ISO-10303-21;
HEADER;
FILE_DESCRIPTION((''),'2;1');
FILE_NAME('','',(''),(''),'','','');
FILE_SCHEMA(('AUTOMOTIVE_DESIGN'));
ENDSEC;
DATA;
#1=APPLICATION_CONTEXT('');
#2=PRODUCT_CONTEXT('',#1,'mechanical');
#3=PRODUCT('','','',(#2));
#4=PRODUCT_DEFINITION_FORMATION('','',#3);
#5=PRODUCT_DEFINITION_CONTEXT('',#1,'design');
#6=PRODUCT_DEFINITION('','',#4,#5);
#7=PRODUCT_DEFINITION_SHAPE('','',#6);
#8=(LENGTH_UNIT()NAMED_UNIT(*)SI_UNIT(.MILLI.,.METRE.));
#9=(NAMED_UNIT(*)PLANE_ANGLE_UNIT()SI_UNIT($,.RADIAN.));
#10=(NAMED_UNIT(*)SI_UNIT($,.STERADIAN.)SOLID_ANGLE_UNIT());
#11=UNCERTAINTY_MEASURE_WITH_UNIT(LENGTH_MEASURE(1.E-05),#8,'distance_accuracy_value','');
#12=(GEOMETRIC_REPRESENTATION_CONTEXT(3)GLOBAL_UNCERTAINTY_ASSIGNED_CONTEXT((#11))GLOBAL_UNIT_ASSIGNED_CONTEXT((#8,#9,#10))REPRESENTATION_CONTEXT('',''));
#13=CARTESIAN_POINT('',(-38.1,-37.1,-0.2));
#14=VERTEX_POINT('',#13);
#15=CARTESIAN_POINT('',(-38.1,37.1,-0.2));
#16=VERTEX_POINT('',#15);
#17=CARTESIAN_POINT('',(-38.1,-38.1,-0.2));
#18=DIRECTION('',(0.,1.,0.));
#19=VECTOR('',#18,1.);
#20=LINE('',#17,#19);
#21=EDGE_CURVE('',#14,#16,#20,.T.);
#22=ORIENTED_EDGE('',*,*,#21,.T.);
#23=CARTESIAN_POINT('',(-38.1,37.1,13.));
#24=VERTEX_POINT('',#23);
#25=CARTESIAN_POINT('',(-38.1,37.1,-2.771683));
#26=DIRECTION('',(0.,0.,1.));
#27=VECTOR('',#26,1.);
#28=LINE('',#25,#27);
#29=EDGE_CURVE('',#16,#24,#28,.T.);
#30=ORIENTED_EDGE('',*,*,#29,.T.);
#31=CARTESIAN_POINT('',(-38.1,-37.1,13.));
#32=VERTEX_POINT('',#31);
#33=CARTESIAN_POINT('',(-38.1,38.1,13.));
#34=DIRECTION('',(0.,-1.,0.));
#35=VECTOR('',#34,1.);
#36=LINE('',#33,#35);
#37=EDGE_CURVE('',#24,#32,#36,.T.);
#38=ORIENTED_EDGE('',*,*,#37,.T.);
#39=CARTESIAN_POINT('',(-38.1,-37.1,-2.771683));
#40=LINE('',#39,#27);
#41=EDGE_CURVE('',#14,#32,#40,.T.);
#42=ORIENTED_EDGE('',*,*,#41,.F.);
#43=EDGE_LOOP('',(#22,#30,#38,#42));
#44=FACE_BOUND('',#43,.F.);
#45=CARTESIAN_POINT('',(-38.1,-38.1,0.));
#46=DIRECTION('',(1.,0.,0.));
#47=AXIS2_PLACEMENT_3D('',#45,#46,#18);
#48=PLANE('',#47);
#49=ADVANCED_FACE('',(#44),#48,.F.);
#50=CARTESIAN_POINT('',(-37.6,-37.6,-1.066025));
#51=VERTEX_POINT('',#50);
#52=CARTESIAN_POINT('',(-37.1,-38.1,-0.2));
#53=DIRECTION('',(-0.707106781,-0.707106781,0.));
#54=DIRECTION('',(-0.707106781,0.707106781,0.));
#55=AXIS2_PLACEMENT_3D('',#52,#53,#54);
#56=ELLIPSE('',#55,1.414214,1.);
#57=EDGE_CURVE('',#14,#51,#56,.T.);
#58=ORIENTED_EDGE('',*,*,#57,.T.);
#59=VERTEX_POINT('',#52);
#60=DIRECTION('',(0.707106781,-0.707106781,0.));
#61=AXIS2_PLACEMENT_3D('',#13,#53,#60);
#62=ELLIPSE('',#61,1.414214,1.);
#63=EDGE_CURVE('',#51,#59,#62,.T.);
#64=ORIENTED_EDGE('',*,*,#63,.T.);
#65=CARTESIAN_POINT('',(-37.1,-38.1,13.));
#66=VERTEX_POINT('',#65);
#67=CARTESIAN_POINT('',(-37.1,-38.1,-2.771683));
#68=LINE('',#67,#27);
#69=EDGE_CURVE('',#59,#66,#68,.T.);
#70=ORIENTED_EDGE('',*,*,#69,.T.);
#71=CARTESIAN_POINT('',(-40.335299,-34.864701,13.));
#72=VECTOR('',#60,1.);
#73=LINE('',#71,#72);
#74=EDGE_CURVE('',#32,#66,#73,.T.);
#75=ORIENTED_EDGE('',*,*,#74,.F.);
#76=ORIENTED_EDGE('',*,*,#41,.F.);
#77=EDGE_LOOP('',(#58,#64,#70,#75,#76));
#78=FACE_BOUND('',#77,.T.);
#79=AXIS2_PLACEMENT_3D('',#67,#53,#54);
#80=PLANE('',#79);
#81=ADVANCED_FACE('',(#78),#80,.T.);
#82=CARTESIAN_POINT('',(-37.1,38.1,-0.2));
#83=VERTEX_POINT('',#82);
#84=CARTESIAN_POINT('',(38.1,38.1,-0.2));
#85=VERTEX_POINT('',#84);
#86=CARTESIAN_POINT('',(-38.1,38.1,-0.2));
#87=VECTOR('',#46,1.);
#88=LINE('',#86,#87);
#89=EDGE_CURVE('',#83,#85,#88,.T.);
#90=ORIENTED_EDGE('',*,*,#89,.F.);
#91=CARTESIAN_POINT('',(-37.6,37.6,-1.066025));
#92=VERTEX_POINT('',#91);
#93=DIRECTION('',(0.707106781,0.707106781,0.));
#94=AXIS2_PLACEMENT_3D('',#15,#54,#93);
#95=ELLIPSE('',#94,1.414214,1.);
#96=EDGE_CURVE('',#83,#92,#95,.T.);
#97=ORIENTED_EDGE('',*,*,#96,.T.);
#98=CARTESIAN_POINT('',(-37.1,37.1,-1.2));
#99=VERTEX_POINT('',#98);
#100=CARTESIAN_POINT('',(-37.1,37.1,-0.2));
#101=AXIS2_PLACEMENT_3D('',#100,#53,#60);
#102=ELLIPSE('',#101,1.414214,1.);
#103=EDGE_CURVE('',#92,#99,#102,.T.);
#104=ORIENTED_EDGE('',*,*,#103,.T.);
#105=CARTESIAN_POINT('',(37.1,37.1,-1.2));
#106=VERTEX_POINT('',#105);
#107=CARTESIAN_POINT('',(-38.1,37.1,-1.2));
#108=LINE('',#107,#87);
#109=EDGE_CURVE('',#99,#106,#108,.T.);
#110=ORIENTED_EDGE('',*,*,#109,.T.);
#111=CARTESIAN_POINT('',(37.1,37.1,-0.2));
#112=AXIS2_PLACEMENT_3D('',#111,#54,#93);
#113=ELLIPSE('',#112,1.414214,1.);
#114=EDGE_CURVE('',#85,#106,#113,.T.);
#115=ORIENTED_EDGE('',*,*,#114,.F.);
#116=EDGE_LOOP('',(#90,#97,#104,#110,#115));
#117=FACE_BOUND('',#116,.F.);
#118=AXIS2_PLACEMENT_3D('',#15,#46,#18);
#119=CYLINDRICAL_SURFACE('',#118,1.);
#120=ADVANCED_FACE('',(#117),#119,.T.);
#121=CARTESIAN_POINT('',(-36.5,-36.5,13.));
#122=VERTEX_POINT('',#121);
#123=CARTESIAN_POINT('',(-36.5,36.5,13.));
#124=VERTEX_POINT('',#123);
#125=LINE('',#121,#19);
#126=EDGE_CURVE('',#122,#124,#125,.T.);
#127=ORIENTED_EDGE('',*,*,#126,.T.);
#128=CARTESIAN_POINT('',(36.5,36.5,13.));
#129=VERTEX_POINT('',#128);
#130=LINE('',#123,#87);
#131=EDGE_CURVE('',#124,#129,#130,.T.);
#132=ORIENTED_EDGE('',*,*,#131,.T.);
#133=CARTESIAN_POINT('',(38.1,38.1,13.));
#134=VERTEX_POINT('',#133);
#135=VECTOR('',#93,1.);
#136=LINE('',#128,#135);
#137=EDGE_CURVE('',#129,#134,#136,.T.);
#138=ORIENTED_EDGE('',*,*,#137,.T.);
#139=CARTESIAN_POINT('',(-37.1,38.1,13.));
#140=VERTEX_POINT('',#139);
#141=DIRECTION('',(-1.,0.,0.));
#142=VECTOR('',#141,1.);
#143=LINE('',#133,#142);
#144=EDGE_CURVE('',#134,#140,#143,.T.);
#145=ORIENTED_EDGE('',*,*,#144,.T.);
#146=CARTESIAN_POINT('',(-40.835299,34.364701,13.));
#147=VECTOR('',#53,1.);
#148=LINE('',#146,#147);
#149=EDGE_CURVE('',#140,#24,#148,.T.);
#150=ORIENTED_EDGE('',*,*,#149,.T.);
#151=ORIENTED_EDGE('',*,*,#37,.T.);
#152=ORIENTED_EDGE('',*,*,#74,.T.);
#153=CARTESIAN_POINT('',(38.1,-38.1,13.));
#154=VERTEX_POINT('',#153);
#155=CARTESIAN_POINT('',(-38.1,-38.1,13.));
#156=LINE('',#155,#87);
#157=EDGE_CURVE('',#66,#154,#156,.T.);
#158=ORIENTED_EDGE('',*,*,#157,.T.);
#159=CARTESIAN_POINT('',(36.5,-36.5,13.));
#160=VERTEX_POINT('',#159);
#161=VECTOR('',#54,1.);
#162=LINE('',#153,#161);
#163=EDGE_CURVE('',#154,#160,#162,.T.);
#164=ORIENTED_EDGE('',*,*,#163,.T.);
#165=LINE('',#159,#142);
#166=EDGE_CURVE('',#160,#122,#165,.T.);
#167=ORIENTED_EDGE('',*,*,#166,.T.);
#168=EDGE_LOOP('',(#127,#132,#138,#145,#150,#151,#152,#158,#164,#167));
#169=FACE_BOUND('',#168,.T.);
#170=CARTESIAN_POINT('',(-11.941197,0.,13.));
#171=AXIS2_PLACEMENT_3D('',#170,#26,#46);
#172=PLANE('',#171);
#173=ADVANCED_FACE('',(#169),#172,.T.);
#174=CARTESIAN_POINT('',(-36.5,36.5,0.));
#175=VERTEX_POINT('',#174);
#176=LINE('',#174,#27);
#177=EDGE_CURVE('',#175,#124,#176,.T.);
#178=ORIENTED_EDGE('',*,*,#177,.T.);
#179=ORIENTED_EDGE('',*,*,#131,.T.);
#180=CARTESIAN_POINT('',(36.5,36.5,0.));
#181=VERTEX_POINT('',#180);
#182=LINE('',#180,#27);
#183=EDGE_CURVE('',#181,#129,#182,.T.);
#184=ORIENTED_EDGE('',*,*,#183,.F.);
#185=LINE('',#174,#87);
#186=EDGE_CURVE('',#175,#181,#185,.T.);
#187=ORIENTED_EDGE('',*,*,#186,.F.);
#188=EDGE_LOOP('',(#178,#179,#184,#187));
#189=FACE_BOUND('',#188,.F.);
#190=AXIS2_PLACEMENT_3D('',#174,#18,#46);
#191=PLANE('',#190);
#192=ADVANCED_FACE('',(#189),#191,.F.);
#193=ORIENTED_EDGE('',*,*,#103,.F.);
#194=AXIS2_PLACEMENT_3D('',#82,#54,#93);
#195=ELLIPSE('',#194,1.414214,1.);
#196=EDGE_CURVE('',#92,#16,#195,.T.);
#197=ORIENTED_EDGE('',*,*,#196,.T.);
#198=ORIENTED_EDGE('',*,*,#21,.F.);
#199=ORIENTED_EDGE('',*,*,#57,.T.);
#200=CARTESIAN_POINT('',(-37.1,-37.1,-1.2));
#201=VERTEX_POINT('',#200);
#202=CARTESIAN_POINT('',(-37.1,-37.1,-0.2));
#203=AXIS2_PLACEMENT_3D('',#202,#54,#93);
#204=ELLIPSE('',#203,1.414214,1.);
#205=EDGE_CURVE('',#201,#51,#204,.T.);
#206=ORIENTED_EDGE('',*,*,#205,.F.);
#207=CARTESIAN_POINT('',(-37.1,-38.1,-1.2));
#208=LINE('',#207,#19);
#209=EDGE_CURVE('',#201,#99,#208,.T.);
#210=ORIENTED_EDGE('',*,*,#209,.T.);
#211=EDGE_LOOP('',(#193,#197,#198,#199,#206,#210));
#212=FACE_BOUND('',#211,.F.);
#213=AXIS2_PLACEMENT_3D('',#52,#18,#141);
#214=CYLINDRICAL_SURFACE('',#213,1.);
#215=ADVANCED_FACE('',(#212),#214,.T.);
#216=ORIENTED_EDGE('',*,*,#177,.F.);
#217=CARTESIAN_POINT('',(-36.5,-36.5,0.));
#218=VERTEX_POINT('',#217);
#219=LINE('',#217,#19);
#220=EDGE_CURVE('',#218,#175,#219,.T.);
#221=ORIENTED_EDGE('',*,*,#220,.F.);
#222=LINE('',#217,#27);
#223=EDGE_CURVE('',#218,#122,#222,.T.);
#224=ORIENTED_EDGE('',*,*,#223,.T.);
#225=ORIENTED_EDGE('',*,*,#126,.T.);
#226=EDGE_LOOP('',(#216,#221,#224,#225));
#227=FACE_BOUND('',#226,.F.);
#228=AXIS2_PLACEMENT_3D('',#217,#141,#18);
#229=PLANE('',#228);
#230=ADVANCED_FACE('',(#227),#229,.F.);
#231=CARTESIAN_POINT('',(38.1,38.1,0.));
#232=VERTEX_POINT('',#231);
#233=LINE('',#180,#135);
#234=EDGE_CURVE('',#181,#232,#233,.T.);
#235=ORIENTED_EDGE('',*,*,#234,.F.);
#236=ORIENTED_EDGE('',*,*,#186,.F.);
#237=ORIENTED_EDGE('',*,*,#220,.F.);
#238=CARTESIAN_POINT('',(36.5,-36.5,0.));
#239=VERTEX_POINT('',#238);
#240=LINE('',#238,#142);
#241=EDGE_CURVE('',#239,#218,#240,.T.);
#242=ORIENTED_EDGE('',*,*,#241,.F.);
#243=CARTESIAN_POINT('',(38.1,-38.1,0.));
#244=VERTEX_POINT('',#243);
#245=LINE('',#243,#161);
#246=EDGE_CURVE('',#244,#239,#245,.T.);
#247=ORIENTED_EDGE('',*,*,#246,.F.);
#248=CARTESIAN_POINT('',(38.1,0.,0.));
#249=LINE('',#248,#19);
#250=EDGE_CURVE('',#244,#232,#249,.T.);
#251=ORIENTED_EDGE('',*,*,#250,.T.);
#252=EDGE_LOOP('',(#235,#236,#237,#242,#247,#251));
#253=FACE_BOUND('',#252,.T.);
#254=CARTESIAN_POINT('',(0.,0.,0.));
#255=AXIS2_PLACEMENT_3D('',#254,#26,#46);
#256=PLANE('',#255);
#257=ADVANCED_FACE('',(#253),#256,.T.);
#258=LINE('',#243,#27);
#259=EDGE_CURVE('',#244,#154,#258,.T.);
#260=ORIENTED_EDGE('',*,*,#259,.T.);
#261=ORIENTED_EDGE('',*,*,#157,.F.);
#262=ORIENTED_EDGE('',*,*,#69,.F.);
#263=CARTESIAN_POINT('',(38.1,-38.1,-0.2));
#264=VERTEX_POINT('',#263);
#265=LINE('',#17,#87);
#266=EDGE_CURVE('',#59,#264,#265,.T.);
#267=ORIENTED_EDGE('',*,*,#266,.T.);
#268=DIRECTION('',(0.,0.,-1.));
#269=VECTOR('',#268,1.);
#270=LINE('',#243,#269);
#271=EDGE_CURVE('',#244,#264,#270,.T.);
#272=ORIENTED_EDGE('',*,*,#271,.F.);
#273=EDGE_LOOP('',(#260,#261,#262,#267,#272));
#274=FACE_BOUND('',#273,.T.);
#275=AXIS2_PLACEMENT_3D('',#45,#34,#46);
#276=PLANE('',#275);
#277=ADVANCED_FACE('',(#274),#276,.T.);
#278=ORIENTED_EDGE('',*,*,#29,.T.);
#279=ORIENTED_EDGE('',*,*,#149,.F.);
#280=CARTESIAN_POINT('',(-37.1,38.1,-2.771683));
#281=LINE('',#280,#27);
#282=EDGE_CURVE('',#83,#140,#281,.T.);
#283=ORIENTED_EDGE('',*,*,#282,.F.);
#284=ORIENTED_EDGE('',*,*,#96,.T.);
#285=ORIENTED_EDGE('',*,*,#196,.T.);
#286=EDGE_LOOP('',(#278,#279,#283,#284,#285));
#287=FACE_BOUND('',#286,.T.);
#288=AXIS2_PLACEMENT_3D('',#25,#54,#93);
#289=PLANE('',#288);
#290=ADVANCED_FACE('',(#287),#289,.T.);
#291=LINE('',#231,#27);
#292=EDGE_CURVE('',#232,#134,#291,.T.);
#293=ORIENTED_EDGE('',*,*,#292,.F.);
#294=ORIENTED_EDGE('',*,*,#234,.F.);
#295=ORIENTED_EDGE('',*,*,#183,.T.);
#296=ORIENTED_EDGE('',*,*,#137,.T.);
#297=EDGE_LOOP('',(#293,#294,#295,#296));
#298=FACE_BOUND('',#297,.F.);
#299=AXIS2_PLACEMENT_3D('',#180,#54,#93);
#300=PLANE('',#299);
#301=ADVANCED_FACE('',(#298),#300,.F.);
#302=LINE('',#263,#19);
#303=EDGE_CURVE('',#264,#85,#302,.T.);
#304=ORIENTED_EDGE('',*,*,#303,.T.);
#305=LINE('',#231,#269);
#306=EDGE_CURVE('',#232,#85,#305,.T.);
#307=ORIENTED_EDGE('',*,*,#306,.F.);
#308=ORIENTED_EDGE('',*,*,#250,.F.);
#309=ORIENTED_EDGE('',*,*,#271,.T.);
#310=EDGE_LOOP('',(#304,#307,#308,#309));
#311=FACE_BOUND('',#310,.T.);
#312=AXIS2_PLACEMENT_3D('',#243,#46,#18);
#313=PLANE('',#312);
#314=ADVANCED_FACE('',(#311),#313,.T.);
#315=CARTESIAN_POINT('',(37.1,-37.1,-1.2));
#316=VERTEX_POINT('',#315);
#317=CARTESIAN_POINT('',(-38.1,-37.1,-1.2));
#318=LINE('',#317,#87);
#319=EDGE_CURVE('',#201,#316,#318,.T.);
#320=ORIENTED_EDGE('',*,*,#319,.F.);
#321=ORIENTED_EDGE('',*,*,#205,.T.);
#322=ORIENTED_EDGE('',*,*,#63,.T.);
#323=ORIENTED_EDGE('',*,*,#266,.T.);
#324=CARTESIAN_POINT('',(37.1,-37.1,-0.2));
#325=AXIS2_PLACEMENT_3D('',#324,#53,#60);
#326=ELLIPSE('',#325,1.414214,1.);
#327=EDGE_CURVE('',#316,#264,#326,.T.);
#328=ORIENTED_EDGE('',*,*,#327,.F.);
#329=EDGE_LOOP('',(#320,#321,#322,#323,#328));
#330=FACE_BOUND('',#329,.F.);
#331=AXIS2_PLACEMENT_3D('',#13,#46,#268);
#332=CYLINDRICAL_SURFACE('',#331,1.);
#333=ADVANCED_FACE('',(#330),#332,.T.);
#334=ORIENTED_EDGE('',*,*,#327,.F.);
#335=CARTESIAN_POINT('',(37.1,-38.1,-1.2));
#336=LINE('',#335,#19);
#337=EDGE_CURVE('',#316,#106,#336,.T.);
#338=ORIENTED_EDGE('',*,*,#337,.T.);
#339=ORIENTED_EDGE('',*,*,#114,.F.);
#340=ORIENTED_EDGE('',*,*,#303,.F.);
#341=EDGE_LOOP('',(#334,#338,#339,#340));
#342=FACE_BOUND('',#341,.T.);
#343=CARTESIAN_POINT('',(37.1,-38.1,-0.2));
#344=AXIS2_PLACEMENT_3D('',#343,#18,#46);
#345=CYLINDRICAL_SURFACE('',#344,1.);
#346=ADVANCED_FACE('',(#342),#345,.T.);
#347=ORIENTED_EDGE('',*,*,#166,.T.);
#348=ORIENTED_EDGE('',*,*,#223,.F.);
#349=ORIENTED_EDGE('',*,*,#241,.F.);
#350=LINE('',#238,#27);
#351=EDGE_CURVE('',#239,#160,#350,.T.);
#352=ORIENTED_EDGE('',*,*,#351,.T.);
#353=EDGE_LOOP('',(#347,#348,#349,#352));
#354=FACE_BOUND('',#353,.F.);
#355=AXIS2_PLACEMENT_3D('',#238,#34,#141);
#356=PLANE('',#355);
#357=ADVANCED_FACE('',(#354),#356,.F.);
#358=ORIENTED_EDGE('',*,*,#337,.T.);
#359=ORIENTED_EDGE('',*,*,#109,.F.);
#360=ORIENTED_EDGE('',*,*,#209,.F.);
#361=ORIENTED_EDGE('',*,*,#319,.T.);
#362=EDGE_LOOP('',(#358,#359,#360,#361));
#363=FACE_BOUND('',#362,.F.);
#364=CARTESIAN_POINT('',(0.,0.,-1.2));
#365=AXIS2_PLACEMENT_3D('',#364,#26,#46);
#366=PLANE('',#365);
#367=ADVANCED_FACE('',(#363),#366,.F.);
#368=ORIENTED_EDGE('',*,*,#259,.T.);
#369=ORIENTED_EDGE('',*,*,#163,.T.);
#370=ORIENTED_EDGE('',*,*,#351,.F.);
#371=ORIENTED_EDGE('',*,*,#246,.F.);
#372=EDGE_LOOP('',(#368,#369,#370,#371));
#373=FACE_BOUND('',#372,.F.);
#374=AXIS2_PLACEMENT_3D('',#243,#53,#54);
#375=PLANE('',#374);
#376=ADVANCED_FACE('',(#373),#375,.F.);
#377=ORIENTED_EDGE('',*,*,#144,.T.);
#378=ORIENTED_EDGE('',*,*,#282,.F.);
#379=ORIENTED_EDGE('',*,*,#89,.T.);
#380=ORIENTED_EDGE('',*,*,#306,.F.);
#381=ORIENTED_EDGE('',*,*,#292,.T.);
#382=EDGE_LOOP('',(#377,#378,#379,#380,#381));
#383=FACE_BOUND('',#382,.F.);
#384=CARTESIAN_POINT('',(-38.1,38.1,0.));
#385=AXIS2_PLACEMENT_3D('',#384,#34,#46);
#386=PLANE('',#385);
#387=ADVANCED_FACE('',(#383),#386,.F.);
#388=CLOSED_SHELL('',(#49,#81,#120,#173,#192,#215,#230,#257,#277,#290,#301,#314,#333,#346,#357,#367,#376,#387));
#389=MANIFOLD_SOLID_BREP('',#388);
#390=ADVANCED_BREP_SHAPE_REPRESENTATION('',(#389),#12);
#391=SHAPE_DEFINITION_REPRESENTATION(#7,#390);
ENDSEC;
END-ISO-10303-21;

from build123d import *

# Parameters (mm, degrees)
F1_DEPTH    = 13
F2_W        = 76.2
F2_H        = 76.2
F3_DEPTH    = 1.2
F4_R        = 1
F5_T1_DEPTH = 18.3433659759


# Not quite as in the source:
# - a fillet or chamfer that OpenCascade refuses, or shapes differently, is made with other operations: its cross-section is extruded or revolved along the edge and cut away or added


with BuildPart() as f1:
    # F0 (on Top) → F1 (new body)
    with BuildSketch(Plane.XY):
        Polygon((-36.5, 36.5), (36.5, 36.5), (38.1, 38.1), (-38.1, 38.1), (-38.1, -38.1), (38.1, -38.1), (36.5, -36.5), (-36.5, -36.5), align=None)
    extrude(amount=F1_DEPTH)

    # F2 (on Top) → F3 (join)
    with BuildSketch(Plane.XY):
        Rectangle(F2_W, F2_H)
    extrude(amount=-F3_DEPTH)

    # F4
    f4_edges = [f1.edges().sort_by_distance(p)[0] for p in [
        (0, -38.1, -1.2),
        (38.1, 0, -1.2),
        (0, 38.1, -1.2),
        (-38.1, 0, -1.2),
    ]]
    fillet(f4_edges, radius=F4_R)

    # F5: chamfer of 1 on 2 edges, made by hand

    # F5_s2 → F5_t1 (cut)
    with BuildSketch(Plane.XY.offset(-2.771682988)):
        Polygon((-37.1, -38.1), (-38.1, -37.1), (-38.1, -38.1), align=None)
        Polygon((-38.1, 37.1), (-37.1, 38.1), (-38.1, 38.1), align=None)
    extrude(amount=F5_T1_DEPTH, mode=Mode.SUBTRACT)


solid = f1.part
